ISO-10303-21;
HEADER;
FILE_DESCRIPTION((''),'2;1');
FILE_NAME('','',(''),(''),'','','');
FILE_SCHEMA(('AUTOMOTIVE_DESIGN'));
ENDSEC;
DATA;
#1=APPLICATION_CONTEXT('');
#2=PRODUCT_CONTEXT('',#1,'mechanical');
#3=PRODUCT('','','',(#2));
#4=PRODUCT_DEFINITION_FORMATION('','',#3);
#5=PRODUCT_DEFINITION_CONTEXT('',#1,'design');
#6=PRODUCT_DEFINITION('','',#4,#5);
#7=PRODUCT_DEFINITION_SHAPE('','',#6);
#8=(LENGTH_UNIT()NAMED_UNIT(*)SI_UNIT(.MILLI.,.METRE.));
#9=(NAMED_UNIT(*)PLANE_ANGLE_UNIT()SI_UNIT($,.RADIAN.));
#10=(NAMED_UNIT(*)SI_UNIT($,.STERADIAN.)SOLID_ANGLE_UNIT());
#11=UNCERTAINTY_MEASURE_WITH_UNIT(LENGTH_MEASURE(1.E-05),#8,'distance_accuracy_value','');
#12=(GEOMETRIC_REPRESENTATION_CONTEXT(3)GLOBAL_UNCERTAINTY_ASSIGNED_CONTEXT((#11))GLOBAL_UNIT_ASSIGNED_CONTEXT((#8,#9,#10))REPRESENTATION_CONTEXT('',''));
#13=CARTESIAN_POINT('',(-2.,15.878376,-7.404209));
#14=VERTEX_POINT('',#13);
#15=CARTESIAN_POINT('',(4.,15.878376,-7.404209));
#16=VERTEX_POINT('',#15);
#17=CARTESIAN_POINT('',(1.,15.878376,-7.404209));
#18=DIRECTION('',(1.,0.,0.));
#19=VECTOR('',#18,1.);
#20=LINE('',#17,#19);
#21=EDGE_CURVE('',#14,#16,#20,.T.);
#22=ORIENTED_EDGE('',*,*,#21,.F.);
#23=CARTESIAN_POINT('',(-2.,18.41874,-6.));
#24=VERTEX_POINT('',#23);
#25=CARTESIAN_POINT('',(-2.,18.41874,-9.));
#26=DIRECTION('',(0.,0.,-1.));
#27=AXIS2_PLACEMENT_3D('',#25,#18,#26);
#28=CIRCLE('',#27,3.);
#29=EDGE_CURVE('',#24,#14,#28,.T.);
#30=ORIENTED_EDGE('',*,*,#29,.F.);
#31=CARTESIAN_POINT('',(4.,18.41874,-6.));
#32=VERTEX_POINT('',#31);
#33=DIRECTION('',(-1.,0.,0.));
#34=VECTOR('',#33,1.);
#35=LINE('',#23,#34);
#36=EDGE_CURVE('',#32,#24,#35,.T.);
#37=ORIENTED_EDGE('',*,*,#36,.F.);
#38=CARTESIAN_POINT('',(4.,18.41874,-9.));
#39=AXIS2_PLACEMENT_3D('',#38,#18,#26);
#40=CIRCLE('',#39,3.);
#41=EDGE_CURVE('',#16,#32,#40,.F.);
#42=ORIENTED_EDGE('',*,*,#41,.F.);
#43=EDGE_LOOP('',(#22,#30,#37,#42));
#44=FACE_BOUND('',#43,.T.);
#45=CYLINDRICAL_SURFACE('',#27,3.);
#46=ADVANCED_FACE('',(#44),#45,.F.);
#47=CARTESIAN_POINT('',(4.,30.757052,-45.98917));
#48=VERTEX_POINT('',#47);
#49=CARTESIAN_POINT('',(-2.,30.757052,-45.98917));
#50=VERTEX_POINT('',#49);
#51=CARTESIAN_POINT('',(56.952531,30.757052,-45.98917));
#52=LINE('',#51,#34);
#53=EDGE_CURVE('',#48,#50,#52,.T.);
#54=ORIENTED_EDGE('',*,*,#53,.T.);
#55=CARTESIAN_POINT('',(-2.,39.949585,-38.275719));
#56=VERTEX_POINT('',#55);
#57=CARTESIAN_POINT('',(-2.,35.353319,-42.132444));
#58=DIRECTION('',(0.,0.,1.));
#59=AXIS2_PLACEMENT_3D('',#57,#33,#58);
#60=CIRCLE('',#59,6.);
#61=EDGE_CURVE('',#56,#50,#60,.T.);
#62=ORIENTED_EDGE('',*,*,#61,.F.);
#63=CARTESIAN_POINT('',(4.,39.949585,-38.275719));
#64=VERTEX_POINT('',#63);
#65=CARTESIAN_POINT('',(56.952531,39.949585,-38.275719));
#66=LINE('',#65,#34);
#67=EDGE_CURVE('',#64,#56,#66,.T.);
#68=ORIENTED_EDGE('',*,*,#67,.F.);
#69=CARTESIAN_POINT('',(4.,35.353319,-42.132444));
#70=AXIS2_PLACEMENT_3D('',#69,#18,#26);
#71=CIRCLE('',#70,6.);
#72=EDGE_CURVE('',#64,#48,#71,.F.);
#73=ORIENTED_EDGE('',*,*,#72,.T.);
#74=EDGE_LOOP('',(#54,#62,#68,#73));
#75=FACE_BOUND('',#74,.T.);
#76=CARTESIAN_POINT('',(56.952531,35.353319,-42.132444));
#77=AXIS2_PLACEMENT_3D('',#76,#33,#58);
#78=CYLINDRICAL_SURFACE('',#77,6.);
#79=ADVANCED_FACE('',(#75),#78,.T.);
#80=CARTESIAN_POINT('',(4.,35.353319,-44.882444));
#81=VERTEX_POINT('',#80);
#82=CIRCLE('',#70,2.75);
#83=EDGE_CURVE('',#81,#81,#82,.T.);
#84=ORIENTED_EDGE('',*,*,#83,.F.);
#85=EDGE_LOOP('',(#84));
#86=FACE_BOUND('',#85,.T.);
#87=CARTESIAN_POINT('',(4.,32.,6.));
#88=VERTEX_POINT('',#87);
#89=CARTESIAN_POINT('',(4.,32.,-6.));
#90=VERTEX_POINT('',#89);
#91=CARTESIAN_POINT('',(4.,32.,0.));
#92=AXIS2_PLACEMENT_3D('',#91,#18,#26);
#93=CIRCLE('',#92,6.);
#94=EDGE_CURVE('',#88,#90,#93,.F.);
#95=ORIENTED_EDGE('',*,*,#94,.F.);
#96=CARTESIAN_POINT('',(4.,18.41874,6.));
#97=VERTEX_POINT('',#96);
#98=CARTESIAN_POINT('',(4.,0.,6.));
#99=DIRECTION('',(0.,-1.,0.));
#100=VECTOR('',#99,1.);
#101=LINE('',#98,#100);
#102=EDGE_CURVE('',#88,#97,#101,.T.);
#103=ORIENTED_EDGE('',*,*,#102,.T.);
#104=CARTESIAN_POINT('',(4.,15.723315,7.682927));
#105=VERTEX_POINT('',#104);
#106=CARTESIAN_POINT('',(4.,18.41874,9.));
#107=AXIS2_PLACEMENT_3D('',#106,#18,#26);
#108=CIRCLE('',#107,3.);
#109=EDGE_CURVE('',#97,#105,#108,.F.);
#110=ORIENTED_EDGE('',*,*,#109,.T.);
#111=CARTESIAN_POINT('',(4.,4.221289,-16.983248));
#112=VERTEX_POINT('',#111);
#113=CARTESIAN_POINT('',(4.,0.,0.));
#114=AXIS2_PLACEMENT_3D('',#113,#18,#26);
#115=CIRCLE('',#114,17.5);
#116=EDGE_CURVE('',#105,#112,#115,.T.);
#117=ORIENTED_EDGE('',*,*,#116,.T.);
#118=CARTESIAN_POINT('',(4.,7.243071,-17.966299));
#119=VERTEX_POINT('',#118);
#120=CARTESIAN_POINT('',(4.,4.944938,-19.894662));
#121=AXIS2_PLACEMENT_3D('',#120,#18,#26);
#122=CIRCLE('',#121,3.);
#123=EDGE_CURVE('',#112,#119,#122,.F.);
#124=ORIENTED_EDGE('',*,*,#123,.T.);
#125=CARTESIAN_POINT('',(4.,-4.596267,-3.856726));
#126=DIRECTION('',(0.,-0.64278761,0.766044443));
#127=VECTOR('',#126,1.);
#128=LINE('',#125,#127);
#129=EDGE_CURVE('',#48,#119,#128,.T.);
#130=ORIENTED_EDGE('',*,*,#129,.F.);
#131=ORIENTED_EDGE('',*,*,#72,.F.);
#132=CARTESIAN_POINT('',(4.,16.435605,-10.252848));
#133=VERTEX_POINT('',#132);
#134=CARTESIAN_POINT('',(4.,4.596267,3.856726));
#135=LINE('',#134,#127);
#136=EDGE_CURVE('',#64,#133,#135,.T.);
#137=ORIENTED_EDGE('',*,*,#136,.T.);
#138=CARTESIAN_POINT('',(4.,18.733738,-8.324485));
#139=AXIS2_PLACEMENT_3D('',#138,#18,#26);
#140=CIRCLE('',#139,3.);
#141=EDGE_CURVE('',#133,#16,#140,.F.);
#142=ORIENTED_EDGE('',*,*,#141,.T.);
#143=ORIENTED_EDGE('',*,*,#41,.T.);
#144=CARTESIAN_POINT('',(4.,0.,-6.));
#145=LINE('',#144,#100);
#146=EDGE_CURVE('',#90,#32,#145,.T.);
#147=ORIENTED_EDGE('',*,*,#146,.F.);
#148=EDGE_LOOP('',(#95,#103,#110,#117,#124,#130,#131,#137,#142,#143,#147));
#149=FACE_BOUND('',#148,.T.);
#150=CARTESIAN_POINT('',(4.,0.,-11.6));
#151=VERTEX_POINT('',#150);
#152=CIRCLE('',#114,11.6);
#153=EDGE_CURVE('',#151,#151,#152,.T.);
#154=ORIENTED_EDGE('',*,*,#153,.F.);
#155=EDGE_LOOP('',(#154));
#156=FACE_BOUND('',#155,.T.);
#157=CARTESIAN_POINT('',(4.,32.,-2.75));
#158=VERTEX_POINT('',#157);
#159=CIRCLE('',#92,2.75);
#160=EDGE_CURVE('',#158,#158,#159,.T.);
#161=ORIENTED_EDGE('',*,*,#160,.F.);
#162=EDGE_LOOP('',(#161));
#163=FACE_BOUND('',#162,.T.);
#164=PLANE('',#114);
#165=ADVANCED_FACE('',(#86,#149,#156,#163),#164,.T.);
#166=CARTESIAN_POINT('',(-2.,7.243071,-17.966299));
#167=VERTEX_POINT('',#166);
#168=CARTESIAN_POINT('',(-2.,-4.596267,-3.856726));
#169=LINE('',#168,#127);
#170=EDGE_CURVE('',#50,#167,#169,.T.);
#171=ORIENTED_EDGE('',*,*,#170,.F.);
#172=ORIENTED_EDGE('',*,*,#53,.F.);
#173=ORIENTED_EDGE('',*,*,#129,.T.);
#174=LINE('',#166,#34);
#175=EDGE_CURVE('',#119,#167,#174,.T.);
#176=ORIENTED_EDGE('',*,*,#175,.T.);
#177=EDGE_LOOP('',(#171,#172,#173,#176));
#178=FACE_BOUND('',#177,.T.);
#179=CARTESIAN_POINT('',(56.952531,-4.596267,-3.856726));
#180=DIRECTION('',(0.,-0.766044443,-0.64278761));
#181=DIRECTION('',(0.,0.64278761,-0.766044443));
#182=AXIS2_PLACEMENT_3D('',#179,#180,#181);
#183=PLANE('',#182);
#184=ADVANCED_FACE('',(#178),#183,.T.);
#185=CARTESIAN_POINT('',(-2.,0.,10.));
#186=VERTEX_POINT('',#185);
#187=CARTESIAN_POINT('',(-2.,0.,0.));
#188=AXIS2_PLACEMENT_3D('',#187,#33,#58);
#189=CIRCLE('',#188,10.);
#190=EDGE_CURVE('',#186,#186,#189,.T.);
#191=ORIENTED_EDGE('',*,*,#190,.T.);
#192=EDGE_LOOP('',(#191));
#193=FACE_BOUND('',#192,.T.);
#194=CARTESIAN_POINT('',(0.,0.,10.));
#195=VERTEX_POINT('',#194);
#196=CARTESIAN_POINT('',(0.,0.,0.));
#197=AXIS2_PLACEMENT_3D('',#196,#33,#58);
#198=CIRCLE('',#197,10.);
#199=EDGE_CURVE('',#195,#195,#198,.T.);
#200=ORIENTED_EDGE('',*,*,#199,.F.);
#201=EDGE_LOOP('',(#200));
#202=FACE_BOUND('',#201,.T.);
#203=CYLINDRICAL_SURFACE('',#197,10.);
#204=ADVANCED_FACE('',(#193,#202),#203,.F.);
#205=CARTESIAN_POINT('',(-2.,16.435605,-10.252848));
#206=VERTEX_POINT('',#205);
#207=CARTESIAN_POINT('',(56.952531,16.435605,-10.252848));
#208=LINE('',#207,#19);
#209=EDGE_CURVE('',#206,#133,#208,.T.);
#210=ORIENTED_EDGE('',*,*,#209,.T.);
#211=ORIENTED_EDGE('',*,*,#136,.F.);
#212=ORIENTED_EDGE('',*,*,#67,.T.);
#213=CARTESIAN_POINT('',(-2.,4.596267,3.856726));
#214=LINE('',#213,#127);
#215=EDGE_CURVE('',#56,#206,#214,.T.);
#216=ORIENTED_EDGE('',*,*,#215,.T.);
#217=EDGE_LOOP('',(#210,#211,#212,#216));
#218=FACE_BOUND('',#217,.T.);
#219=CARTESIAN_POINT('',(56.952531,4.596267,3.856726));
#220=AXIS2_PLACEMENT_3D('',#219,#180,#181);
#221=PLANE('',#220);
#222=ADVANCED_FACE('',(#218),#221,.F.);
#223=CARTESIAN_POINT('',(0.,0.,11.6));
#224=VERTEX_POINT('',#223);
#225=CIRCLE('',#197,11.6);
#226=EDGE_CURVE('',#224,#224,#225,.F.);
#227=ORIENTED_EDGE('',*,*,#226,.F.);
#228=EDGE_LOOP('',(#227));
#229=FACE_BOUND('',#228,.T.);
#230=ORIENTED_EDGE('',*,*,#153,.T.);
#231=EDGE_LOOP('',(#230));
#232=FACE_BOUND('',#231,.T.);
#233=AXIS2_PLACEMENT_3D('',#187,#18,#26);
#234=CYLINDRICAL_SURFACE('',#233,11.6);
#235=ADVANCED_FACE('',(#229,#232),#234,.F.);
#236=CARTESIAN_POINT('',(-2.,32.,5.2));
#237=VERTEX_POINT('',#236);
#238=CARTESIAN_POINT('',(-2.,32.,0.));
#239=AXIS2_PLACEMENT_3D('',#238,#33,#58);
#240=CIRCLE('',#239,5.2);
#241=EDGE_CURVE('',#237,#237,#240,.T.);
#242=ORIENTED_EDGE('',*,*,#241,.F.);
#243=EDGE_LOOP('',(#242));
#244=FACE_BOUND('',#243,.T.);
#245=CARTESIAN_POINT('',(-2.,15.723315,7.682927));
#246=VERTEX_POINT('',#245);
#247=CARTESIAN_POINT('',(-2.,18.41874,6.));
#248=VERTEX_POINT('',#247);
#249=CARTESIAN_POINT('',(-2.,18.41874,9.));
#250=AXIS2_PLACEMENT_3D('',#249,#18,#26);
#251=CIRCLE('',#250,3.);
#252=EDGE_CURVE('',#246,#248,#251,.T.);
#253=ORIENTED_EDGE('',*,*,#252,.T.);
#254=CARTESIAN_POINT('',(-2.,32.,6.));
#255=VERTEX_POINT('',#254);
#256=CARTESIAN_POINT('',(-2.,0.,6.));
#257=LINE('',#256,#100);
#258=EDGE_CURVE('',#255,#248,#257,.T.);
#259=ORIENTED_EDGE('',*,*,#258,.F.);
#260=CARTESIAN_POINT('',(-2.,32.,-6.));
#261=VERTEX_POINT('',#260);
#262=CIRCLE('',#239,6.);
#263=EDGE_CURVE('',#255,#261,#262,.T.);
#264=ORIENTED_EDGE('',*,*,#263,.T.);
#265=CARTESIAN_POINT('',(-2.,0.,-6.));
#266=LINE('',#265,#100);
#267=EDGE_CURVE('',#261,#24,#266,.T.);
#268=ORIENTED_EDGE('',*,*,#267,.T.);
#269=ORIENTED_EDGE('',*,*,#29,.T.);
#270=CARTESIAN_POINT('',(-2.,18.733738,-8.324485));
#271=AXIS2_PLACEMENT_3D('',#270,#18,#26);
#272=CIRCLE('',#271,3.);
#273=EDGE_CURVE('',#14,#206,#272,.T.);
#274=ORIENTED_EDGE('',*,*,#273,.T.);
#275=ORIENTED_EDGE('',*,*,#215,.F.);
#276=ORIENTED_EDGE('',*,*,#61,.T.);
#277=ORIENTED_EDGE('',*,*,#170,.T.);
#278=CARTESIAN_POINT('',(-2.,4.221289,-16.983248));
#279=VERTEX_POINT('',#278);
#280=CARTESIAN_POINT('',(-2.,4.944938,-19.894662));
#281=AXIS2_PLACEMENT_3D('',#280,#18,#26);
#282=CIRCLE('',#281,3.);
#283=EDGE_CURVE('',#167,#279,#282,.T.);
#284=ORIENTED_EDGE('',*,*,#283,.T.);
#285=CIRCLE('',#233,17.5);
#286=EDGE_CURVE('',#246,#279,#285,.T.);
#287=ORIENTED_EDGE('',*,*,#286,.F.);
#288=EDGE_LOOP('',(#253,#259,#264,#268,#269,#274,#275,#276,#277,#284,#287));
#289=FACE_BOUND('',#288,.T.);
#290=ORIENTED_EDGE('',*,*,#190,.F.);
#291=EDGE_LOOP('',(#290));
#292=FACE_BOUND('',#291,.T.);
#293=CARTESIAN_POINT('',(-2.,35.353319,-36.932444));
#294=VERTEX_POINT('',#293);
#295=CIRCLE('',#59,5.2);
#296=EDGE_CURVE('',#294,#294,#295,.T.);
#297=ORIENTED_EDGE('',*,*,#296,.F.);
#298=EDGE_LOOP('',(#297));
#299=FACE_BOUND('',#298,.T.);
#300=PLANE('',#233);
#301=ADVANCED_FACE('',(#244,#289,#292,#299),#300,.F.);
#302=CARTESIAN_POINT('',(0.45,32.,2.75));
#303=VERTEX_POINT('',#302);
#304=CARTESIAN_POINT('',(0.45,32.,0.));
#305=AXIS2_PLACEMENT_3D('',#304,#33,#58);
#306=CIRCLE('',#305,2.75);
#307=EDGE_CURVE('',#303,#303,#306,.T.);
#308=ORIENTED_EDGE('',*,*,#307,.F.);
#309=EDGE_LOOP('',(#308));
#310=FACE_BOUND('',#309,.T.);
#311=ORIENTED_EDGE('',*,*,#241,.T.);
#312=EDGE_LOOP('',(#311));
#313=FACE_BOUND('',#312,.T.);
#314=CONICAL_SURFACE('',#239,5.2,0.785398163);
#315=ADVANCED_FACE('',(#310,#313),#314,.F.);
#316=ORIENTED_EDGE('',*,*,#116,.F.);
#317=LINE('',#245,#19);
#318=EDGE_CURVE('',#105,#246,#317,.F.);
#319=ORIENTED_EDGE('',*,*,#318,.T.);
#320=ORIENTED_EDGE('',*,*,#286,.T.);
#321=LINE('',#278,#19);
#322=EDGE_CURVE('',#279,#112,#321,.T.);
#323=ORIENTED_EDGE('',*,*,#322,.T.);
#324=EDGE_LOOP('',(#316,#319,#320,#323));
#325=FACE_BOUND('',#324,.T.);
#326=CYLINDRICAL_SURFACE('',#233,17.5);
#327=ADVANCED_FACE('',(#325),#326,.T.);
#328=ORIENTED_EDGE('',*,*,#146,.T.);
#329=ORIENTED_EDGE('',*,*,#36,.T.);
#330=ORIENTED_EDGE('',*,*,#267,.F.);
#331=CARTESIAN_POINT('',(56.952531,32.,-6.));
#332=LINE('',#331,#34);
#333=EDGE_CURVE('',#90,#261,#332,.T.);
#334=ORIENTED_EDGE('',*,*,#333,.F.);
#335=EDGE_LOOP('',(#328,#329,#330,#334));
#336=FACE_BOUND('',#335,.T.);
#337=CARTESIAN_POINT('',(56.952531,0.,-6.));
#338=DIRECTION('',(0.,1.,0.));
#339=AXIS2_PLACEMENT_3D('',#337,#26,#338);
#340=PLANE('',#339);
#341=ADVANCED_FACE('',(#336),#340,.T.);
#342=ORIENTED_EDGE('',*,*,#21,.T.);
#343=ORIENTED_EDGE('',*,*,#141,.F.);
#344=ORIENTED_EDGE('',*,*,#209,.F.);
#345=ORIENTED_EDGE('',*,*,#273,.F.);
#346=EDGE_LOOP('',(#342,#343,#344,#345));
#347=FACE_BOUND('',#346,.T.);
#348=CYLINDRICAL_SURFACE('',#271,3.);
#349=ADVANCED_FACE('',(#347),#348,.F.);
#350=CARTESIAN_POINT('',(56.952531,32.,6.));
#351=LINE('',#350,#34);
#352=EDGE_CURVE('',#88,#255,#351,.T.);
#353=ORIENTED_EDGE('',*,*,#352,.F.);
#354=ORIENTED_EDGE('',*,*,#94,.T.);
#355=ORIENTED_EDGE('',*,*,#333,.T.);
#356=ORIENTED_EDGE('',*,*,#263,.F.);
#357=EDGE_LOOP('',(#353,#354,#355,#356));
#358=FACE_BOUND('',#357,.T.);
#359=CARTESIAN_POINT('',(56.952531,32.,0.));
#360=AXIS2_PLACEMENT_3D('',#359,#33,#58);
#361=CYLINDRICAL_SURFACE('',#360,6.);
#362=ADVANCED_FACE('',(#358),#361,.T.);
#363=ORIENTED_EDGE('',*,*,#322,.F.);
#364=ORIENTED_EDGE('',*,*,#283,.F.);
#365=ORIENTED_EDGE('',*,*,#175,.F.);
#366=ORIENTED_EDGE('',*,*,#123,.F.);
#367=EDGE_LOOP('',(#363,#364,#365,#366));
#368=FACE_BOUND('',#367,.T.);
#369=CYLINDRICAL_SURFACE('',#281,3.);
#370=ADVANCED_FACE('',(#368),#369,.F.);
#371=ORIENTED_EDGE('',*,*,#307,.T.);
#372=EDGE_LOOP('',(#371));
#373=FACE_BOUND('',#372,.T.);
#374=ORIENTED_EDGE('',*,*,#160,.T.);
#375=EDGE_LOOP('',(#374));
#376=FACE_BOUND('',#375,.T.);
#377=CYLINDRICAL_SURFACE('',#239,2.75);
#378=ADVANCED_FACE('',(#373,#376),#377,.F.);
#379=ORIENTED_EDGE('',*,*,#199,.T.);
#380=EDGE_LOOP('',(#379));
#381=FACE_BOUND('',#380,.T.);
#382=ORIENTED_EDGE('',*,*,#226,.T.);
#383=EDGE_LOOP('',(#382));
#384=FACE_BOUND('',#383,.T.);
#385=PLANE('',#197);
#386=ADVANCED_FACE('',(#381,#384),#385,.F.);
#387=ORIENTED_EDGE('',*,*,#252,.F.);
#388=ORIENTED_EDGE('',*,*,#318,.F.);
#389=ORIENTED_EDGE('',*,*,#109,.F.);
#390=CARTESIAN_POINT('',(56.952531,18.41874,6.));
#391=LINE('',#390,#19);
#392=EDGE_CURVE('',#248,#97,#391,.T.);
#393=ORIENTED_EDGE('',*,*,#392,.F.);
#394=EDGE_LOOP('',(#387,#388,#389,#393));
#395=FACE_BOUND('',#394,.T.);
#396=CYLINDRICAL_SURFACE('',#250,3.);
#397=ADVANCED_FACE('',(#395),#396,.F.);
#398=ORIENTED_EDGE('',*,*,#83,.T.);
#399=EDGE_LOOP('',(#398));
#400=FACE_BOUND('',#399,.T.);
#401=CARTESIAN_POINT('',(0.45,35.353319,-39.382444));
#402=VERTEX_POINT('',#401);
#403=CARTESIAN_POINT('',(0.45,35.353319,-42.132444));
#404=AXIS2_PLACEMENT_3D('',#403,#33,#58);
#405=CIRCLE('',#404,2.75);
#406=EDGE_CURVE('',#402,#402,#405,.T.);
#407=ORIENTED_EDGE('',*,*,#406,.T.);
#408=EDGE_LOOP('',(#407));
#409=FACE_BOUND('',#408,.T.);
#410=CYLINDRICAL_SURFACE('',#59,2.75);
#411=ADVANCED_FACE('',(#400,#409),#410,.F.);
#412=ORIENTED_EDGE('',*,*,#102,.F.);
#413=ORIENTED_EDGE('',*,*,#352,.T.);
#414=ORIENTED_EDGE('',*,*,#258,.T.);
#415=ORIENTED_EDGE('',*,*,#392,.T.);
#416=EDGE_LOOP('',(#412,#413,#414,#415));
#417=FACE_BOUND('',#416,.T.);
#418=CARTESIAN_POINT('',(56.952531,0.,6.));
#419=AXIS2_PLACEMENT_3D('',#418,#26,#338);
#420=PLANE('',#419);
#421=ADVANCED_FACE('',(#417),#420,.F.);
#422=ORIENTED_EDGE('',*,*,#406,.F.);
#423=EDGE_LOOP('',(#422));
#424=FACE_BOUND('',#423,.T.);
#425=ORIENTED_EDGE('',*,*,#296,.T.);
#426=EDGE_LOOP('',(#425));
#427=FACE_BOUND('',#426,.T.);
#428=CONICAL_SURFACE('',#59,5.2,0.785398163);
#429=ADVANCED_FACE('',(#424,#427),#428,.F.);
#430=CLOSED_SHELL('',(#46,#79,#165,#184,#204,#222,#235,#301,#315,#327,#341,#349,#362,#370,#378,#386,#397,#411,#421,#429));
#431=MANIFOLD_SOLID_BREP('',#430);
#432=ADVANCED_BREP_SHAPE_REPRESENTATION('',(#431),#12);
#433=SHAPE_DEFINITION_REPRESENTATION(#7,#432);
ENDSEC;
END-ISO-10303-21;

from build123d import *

# Parameters (mm, degrees)
BOSS_EXTRUDE1_DEPTH                                 = 4
BOSS_EXTRUDE1_DEPTH_BACK                            = 2
SKETCH1_R                                           = 17.5
SKETCH1_R_2                                         = 11.6
BOSS_EXTRUDE2_DEPTH                                 = 6
CSK_FOR_M5_COUNTERSUNK_FLAT_HEAD_SCREW2_D           = 5.5
CSK_FOR_M5_COUNTERSUNK_FLAT_HEAD_SCREW2_CSINK_D     = 10.4
CSK_FOR_M5_COUNTERSUNK_FLAT_HEAD_SCREW2_CSINK_ANGLE = 90
FILLET1_R                                           = 3
SKETCH5_R                                           = 11.6
SKETCH5_R_2                                         = 10
BOSS_EXTRUDE3_DEPTH                                 = 2


with BuildPart() as part:
    # Sketch1 → Boss-Extrude1 (new, two sides: drawn at the far end of the back side and taken through both)
    with BuildSketch(Plane(origin=(0, 0, 0), x_dir=(0, 0, -1), z_dir=(1, 0, 0)).offset(-BOSS_EXTRUDE1_DEPTH_BACK)):
        Circle(SKETCH1_R)
        Circle(SKETCH1_R_2, mode=Mode.SUBTRACT)
    extrude(amount=BOSS_EXTRUDE1_DEPTH + BOSS_EXTRUDE1_DEPTH_BACK)

    # Sketch2 → Boss-Extrude2 (add)
    with BuildSketch(Plane.ZY.offset(2)):
        with BuildLine():
            Line((-8.736495138, 15.163233584), (-38.275718713, 39.949585191))
            ThreePointArc((-38.275718713, 39.949585191), (-46.72871103, 39.210044191), (-45.98917003, 30.757051874))
            Line((-45.98917003, 30.757051874), (-16.449946454, 5.970700266))
            ThreePointArc((-16.449946454, 5.970700266), (-15.159340579, 8.743248436), (-13.405777755, 11.24878317))
            ThreePointArc((-13.405777755, 11.24878317), (-11.242810713, 13.410786975), (-8.736495138, 15.163233584))
        make_face()
        with BuildLine():
            Line((-6, 32), (-6, 16.439282223))
            ThreePointArc((-6, 16.439282223), (-3.046519416, 17.232780375), (0, 17.5))
            ThreePointArc((0, 17.5), (3.046519416, 17.232780375), (6, 16.439282223))
            Line((6, 16.439282223), (6, 32))
            ThreePointArc((6, 32), (0, 38), (-6, 32))
        make_face()
    extrude(amount=-BOSS_EXTRUDE2_DEPTH)

    # CSK for M5 Countersunk Flat Head Screw2 (through all)
    with Locations(Plane.ZY.offset(2)):
        with Locations((0, 32), (-42.132444372, 35.353318533)):
            CounterSinkHole(CSK_FOR_M5_COUNTERSUNK_FLAT_HEAD_SCREW2_D / 2, CSK_FOR_M5_COUNTERSUNK_FLAT_HEAD_SCREW2_CSINK_D / 2, counter_sink_angle=CSK_FOR_M5_COUNTERSUNK_FLAT_HEAD_SCREW2_CSINK_ANGLE)

    # Fillet1
    # the kernel refuses this fillet: 3 mm, written as the material it adds along each edge
    with BuildSketch(Plane(origin=(-2, 5.970700266, -16.449946454), x_dir=(0, -0.9565409410444833, -0.2915980591597522), z_dir=(1, 0, 0)), Plane(origin=(4, 15.163233584, -8.736495138), x_dir=(0, 0.45326962070001187, 0.8913734632299009), z_dir=(-1, 0, 0)), Plane(origin=(-2, 16.439282223, -6), x_dir=(0, -0.3914755922176966, -0.9201884919394524), z_dir=(1, 0, 0)), Plane(origin=(4, 16.439282223, 6), x_dir=(0, -0.39147559221769407, 0.9201884919394534), z_dir=(-1, 0, 0))) as fillet1_piece_1:
        with BuildLine():
            CenterArc((1.985655892, 2.995901464), FILLET1_R, 203.046346261, 63.958350044)
            Line((-0.774909584, 1.821474687), (0, 0))
            ThreePointArc((0, 0), (0.914446792, 0.02390813), (1.828893584, 0))
        make_face()
    extrude(amount=6)

    # Sketch5 → Boss-Extrude3 (add)
    with BuildSketch(Plane.ZY.offset(2)):
        with Locations(Location((0, 0, 0), (0, 0, 180))):
            Circle(SKETCH5_R)
        Circle(SKETCH5_R_2, mode=Mode.SUBTRACT)
    extrude(amount=-BOSS_EXTRUDE3_DEPTH)


solid = part.part
